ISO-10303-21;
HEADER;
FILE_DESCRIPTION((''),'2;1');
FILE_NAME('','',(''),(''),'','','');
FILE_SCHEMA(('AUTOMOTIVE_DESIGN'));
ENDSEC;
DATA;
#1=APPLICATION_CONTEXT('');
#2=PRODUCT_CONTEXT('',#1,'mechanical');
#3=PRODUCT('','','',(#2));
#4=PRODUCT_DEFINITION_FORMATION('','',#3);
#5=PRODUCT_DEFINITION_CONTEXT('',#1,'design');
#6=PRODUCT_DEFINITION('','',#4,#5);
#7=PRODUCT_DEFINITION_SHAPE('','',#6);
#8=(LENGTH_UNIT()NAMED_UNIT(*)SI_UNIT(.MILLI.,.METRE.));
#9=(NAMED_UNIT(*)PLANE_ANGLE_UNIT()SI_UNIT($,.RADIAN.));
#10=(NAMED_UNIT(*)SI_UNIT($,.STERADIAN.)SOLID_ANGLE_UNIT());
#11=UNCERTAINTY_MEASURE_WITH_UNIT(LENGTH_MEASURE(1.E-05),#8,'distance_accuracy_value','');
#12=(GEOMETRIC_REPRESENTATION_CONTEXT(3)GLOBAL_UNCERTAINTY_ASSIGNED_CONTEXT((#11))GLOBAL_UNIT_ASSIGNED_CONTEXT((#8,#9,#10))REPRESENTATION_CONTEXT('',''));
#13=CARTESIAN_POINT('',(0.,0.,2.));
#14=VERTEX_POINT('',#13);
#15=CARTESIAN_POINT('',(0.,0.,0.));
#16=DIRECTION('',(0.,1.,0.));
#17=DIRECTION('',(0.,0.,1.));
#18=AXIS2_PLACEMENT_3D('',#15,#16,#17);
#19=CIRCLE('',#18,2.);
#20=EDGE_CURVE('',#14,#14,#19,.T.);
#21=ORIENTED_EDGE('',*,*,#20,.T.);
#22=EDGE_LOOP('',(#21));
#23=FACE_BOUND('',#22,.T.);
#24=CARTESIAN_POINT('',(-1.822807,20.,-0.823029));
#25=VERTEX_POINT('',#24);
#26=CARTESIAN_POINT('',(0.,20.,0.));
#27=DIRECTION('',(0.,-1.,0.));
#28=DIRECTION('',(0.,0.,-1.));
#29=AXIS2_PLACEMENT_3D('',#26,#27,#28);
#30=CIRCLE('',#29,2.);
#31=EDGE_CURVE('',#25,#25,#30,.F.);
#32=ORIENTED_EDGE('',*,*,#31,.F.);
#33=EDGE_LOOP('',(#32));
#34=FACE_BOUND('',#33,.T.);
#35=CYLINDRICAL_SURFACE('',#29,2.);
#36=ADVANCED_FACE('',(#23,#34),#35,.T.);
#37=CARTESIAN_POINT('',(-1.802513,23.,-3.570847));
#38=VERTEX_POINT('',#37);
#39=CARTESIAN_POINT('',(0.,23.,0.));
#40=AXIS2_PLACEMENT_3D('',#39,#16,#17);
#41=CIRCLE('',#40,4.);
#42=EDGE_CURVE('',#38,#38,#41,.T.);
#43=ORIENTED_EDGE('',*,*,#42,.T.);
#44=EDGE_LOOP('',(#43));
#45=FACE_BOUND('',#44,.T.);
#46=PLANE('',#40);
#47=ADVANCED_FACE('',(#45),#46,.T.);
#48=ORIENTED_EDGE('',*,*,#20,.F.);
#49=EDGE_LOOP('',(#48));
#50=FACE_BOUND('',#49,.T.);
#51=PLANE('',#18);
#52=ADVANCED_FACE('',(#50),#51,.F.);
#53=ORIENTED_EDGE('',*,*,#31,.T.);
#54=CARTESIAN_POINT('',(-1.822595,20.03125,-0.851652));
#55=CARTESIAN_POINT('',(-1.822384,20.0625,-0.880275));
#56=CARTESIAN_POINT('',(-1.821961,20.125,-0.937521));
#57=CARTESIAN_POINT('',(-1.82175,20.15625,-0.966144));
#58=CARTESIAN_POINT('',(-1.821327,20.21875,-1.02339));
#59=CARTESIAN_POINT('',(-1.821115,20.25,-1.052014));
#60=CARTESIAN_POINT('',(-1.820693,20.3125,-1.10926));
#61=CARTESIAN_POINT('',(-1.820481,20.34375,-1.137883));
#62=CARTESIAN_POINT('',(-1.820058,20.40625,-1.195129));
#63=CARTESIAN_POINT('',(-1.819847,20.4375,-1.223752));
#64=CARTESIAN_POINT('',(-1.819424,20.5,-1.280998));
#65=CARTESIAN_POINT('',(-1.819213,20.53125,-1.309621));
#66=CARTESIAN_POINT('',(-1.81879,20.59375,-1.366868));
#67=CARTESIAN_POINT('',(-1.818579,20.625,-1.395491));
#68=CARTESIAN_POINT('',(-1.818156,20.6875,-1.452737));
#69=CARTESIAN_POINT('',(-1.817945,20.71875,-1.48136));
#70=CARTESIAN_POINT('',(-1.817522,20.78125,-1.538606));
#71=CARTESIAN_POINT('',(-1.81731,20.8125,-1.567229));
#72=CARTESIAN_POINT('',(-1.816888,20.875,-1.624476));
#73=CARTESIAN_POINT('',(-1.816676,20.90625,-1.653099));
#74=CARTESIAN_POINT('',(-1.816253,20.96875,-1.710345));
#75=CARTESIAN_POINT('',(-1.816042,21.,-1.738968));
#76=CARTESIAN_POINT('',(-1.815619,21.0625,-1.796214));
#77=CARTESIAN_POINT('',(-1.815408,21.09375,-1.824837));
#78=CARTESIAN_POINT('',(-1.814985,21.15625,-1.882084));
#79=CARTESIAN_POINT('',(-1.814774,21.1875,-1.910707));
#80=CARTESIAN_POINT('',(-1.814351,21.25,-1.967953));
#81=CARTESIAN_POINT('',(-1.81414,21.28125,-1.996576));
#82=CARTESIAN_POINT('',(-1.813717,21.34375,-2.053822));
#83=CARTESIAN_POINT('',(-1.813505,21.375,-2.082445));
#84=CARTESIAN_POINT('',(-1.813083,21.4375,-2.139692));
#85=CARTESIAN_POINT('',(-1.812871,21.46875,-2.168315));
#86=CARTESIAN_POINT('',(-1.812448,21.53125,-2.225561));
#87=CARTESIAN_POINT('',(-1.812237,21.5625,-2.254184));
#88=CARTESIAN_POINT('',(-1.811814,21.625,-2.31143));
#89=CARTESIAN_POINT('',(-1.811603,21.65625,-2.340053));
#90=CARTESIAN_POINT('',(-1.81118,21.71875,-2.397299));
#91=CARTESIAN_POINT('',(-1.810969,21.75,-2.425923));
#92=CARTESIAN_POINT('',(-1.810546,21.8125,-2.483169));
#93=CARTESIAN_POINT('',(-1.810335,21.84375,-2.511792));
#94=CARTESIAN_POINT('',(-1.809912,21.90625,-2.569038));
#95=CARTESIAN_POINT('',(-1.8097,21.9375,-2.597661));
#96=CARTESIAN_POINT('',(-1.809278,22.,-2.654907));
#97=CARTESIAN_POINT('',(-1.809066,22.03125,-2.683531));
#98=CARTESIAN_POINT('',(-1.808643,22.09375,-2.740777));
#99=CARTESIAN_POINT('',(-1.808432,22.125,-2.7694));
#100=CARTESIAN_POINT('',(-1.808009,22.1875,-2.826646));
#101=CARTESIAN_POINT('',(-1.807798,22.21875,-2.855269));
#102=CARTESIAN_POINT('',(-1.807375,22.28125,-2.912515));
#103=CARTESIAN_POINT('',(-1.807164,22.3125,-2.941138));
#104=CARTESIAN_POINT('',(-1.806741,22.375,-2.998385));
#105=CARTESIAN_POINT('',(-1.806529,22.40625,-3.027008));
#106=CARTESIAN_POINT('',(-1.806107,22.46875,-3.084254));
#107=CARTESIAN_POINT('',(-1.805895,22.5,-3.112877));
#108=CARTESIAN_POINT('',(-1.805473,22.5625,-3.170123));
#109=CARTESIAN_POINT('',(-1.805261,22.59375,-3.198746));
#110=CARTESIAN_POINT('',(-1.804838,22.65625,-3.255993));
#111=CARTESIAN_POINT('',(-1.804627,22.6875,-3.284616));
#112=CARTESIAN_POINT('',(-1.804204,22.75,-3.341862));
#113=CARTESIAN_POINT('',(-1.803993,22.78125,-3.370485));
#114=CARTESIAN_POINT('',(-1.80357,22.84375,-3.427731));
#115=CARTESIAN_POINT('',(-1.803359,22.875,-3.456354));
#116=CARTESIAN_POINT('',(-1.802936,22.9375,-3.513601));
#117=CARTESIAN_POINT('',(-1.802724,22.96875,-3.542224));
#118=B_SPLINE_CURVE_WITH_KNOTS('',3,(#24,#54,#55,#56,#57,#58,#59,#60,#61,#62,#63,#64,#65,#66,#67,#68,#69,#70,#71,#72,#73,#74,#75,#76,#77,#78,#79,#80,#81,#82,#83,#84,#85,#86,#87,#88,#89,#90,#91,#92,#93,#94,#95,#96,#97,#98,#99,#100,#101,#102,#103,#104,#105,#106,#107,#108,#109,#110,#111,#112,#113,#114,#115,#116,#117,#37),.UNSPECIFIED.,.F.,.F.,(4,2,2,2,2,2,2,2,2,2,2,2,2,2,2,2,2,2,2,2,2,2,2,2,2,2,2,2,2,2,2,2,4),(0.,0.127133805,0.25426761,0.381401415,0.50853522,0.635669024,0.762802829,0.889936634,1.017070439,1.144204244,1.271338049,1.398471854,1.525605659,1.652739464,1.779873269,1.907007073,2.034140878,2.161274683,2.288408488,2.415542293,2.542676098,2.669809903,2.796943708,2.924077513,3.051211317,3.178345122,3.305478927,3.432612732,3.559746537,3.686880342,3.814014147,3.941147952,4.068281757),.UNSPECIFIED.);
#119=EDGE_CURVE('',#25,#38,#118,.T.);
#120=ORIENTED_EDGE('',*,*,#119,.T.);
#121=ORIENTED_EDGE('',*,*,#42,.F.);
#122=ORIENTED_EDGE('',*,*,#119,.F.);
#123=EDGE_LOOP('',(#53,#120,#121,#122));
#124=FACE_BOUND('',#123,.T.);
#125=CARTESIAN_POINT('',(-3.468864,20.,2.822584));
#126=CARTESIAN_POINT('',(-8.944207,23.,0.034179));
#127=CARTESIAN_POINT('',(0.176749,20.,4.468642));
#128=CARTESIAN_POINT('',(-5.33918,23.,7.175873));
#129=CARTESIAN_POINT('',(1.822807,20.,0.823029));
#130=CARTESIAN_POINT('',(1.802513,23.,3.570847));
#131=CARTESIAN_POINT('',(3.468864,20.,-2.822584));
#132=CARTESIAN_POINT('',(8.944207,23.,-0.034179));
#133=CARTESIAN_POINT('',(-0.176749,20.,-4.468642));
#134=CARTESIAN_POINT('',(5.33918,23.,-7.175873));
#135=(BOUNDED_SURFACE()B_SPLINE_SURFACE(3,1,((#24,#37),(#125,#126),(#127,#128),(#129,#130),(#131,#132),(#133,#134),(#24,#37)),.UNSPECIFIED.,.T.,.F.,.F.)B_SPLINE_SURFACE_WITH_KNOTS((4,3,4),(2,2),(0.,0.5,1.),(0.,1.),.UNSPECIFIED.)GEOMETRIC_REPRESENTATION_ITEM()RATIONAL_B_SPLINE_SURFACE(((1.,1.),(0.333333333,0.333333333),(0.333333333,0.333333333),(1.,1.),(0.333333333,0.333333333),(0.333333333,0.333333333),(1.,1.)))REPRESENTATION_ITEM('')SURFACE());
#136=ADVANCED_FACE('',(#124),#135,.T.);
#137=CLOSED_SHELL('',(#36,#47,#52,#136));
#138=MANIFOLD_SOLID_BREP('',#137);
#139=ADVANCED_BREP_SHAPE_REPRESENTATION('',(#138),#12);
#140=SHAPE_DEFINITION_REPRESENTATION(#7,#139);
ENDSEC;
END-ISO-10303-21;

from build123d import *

# Parameters (mm, degrees)
SKETCH1_R           = 2
BOSS_EXTRUDE1_DEPTH = 20


with BuildPart() as part:
    # Sketch1 → Boss-Extrude1 (new body)
    with BuildSketch(Plane(origin=(0, 0, 0), x_dir=(1, 0, 0), z_dir=(0, 1, 0))):
        with Locations(Location((0, 0, 0), (0, 0, 270))):
            Circle(SKETCH1_R)
    extrude(amount=BOSS_EXTRUDE1_DEPTH)

    # Loft1: read off the stored shape, not the designer's step
    # Loft1: loft between two sections, ruled curve by curve
    loft1_from = [
        Edge.make_bspline([(-1.822806553, 20, -0.823028717), (-3.468863988, 20, 2.822584389), (0.176749119, 20, 4.468641824), (1.822806553, 20, 0.823028717), (3.468863988, 20, -2.822584389), (-0.176749119, 20, -4.468641824), (-1.822806553, 20, -0.823028717)], [0, 0, 0, 0, 0.5, 0.5, 0.5, 1, 1, 1, 1], 3, [1, 0.333333333, 0.333333333, 1, 0.333333333, 0.333333333, 1]),
    ]
    loft1_to = [
        Edge.make_bspline([(-1.802513065, 23.000000096, -3.57084677), (-8.944206604, 23.000000096, 0.034179359), (-5.339180475, 23.000000096, 7.175872899), (1.802513065, 23.000000096, 3.57084677), (8.944206604, 23.000000096, -0.034179359), (5.339180475, 23.000000096, -7.175872899), (-1.802513065, 23.000000096, -3.57084677)], [0, 0, 0, 0, 0.5, 0.5, 0.5, 1, 1, 1, 1], 3, [1, 0.333333333, 0.333333333, 1, 0.333333333, 0.333333333, 1]),
    ]
    loft1 = Solid(Shell([*[Face.make_surface_from_curves(loft1_from[k], loft1_to[k]) for k in range(1)], Face(Wire(loft1_from)), Face(Wire(loft1_to))]))
    add(loft1)


solid = part.part
